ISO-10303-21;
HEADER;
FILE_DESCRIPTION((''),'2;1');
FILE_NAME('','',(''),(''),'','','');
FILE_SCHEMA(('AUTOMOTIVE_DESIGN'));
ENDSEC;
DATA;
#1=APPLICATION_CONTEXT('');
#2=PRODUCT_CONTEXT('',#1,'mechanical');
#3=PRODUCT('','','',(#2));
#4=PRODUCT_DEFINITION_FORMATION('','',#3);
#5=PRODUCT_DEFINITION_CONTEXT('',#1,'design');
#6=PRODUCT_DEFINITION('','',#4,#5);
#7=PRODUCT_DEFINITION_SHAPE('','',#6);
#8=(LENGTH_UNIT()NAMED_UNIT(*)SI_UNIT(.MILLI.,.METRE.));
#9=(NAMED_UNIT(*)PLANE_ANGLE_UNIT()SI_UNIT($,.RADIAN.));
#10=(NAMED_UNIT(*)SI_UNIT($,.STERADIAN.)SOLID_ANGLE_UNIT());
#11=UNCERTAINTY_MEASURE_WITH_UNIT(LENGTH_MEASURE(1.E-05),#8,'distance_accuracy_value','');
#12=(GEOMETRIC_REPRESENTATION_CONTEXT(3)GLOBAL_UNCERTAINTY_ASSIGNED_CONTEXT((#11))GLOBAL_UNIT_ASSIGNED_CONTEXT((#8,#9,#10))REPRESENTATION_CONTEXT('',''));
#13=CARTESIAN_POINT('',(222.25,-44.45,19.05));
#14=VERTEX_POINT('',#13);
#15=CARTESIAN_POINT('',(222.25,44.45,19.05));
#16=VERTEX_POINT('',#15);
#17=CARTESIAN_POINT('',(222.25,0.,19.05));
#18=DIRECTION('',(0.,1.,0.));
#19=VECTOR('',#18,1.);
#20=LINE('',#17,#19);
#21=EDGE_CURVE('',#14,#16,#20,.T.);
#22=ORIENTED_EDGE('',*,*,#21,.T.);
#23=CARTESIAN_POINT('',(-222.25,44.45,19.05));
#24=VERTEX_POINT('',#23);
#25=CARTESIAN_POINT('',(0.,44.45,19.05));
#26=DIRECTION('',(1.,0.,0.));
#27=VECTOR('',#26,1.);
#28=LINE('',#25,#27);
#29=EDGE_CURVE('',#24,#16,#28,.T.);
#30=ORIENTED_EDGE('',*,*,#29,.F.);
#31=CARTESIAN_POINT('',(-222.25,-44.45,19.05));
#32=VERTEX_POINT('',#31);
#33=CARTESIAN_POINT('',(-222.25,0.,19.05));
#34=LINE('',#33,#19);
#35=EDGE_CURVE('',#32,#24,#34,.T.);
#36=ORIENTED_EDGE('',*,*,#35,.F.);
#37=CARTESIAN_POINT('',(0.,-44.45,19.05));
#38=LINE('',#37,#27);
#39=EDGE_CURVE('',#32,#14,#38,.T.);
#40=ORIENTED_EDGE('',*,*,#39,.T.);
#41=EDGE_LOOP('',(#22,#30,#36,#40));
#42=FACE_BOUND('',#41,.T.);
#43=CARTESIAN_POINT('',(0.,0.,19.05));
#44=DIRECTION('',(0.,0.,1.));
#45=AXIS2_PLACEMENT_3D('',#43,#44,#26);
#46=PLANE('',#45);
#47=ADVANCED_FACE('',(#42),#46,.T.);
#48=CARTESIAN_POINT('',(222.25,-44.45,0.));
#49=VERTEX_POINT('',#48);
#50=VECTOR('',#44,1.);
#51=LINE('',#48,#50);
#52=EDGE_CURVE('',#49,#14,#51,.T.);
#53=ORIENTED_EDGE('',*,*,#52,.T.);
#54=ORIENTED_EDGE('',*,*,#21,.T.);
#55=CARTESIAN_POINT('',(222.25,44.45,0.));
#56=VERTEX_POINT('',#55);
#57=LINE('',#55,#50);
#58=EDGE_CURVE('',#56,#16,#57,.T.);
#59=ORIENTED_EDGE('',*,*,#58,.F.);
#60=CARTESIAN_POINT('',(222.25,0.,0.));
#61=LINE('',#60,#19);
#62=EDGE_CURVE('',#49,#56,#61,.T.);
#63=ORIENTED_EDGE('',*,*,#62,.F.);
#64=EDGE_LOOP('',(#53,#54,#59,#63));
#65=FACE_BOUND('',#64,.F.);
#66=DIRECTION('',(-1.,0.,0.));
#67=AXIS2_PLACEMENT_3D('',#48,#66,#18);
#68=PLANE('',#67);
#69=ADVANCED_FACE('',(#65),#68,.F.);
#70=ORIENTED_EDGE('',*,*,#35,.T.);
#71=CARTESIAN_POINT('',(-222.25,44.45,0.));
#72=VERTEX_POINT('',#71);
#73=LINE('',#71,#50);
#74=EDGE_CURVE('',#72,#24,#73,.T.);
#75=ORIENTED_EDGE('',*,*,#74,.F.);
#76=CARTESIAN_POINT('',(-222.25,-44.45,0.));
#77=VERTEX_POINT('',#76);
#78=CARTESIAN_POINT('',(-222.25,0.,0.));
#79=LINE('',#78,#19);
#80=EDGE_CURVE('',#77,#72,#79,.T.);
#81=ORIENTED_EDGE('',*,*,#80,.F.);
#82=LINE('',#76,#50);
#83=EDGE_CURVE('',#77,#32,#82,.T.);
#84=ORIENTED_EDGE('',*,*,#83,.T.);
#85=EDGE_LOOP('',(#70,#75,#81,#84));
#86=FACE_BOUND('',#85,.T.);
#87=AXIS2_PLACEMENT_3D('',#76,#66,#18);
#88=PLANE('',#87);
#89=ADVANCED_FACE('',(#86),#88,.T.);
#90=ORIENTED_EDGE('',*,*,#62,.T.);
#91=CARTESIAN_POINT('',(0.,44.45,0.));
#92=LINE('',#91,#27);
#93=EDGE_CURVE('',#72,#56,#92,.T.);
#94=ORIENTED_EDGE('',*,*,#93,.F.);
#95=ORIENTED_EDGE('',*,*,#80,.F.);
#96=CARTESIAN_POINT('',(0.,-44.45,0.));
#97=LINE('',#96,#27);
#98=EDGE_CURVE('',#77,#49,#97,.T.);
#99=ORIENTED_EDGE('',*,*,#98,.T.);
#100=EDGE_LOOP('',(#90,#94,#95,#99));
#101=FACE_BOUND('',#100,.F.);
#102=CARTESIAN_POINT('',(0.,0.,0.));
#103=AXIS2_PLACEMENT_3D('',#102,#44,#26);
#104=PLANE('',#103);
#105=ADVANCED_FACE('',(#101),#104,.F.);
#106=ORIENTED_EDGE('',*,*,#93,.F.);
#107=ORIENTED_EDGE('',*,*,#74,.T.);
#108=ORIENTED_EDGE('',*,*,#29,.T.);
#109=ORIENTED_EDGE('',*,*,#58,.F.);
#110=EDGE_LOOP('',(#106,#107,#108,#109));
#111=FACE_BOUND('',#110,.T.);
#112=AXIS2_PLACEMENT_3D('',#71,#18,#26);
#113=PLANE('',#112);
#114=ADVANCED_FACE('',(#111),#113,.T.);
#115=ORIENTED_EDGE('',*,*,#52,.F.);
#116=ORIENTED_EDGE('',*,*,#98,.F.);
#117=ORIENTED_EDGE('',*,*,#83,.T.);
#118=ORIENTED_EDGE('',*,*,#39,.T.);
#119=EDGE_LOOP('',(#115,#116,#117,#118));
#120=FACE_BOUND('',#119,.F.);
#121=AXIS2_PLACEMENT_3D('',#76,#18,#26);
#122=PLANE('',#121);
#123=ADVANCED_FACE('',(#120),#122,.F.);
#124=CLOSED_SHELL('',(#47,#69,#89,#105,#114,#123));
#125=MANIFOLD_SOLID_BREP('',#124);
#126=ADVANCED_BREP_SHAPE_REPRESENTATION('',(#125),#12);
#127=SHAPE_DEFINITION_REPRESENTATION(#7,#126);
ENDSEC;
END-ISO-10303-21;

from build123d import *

# Parameters (mm, degrees)
F0_W     = 444.5
F0_H     = 88.9
F1_DEPTH = 19.05


# Not quite as in the source:
# - a feature of the source that left no trace in its solid (it failed there, or was rolled back) is left out


with BuildPart() as f1:
    # F0 (on Top) → F1 (new body)
    with BuildSketch(Plane.XY):
        Rectangle(F0_W, F0_H)
    extrude(amount=F1_DEPTH)


solid = f1.part
